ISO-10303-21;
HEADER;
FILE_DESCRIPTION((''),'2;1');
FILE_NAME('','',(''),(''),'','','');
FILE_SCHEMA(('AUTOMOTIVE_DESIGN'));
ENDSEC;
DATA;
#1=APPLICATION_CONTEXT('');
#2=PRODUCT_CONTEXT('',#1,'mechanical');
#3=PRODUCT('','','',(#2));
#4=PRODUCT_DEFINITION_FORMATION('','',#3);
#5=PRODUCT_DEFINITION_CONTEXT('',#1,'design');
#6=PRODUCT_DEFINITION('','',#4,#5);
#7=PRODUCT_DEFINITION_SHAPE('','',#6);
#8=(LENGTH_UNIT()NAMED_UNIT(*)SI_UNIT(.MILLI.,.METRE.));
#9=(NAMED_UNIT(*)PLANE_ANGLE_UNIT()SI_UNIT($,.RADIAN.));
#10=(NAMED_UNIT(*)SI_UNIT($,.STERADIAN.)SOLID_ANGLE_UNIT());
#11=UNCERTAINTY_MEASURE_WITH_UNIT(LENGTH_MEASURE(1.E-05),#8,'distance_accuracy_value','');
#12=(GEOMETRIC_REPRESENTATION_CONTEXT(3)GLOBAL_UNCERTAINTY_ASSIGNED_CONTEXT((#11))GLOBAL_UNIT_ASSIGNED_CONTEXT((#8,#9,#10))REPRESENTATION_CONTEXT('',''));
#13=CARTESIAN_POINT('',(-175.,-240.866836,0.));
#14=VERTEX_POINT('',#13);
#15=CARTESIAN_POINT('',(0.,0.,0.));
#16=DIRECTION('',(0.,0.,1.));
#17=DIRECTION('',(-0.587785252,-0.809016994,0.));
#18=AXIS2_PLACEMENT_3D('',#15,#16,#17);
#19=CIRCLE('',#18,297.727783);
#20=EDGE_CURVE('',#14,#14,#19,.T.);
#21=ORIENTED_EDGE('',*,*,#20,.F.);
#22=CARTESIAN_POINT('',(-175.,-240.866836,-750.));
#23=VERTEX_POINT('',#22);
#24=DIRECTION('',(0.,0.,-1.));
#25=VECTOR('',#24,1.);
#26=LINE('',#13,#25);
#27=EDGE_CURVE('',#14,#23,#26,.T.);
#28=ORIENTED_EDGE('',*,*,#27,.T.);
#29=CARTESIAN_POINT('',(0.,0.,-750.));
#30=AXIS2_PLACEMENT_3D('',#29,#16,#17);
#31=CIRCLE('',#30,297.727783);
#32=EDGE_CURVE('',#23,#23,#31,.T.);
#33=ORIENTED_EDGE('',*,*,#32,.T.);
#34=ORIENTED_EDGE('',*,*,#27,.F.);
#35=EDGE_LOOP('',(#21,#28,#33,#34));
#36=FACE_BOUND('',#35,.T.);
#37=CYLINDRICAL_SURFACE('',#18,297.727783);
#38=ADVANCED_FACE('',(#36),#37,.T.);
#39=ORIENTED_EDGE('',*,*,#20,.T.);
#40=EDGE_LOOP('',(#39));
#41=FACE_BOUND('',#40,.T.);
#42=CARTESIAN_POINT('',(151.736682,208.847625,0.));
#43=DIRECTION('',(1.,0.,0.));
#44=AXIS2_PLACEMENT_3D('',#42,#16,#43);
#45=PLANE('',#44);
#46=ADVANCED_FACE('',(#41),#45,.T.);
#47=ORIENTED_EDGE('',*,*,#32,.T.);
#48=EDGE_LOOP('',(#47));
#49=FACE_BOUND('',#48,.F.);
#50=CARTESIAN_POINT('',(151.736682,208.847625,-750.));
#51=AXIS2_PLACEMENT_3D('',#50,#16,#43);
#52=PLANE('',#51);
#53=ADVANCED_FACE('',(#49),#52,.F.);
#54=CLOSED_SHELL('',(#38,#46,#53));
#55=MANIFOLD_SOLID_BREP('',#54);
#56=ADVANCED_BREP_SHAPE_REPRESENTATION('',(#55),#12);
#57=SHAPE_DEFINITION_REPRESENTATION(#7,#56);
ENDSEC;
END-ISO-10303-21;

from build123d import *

# Parameters (mm, degrees)
F1_DEPTH = 750


# Not quite as in the source:
# - a feature of the source that left no trace in its solid (it failed there, or was rolled back) is left out


with BuildPart() as f1:
    # F0 (on Top) → F1 (new body)
    with BuildSketch(Plane.XY):
        with BuildLine():
            ThreePointArc((283.1559480312, 92.0029446208), (175, 240.8668360825), (0, 297.7277829232))
            Line((0, 297.7277829232), (283.1559480312, 92.0029446208))
        make_face()
        Polygon((283.1559480312, 92.0029446208), (0, 297.7277829232), (-283.1559480312, 92.0029446208), (-175, -240.8668360825), (175, -240.8668360825), align=None)
        with BuildLine():
            Line((-283.1559480312, 92.0029446208), (0, 297.7277829232))
            ThreePointArc((0, 297.7277829232), (-175, 240.8668360825), (-283.1559480312, 92.0029446208))
        make_face()
        with BuildLine():
            ThreePointArc((297.7277829232, 0), (294.0622598645, 46.5748864492), (283.1559480312, 92.0029446208))
            Line((283.1559480312, 92.0029446208), (175, -240.8668360825))
            ThreePointArc((175, -240.8668360825), (265.2773970167, -135.1655849557), (297.7277829232, 0))
        make_face()
        with BuildLine():
            Line((-175, -240.8668360825), (-283.1559480312, 92.0029446208))
            ThreePointArc((-283.1559480312, 92.0029446208), (-283.1559480312, -92.0029446208), (-175, -240.8668360825))
        make_face()
        with BuildLine():
            ThreePointArc((-175, -240.8668360825), (0, -297.7277829232), (175, -240.8668360825))
            Line((175, -240.8668360825), (-175, -240.8668360825))
        make_face()
    extrude(amount=-F1_DEPTH)


solid = f1.part
